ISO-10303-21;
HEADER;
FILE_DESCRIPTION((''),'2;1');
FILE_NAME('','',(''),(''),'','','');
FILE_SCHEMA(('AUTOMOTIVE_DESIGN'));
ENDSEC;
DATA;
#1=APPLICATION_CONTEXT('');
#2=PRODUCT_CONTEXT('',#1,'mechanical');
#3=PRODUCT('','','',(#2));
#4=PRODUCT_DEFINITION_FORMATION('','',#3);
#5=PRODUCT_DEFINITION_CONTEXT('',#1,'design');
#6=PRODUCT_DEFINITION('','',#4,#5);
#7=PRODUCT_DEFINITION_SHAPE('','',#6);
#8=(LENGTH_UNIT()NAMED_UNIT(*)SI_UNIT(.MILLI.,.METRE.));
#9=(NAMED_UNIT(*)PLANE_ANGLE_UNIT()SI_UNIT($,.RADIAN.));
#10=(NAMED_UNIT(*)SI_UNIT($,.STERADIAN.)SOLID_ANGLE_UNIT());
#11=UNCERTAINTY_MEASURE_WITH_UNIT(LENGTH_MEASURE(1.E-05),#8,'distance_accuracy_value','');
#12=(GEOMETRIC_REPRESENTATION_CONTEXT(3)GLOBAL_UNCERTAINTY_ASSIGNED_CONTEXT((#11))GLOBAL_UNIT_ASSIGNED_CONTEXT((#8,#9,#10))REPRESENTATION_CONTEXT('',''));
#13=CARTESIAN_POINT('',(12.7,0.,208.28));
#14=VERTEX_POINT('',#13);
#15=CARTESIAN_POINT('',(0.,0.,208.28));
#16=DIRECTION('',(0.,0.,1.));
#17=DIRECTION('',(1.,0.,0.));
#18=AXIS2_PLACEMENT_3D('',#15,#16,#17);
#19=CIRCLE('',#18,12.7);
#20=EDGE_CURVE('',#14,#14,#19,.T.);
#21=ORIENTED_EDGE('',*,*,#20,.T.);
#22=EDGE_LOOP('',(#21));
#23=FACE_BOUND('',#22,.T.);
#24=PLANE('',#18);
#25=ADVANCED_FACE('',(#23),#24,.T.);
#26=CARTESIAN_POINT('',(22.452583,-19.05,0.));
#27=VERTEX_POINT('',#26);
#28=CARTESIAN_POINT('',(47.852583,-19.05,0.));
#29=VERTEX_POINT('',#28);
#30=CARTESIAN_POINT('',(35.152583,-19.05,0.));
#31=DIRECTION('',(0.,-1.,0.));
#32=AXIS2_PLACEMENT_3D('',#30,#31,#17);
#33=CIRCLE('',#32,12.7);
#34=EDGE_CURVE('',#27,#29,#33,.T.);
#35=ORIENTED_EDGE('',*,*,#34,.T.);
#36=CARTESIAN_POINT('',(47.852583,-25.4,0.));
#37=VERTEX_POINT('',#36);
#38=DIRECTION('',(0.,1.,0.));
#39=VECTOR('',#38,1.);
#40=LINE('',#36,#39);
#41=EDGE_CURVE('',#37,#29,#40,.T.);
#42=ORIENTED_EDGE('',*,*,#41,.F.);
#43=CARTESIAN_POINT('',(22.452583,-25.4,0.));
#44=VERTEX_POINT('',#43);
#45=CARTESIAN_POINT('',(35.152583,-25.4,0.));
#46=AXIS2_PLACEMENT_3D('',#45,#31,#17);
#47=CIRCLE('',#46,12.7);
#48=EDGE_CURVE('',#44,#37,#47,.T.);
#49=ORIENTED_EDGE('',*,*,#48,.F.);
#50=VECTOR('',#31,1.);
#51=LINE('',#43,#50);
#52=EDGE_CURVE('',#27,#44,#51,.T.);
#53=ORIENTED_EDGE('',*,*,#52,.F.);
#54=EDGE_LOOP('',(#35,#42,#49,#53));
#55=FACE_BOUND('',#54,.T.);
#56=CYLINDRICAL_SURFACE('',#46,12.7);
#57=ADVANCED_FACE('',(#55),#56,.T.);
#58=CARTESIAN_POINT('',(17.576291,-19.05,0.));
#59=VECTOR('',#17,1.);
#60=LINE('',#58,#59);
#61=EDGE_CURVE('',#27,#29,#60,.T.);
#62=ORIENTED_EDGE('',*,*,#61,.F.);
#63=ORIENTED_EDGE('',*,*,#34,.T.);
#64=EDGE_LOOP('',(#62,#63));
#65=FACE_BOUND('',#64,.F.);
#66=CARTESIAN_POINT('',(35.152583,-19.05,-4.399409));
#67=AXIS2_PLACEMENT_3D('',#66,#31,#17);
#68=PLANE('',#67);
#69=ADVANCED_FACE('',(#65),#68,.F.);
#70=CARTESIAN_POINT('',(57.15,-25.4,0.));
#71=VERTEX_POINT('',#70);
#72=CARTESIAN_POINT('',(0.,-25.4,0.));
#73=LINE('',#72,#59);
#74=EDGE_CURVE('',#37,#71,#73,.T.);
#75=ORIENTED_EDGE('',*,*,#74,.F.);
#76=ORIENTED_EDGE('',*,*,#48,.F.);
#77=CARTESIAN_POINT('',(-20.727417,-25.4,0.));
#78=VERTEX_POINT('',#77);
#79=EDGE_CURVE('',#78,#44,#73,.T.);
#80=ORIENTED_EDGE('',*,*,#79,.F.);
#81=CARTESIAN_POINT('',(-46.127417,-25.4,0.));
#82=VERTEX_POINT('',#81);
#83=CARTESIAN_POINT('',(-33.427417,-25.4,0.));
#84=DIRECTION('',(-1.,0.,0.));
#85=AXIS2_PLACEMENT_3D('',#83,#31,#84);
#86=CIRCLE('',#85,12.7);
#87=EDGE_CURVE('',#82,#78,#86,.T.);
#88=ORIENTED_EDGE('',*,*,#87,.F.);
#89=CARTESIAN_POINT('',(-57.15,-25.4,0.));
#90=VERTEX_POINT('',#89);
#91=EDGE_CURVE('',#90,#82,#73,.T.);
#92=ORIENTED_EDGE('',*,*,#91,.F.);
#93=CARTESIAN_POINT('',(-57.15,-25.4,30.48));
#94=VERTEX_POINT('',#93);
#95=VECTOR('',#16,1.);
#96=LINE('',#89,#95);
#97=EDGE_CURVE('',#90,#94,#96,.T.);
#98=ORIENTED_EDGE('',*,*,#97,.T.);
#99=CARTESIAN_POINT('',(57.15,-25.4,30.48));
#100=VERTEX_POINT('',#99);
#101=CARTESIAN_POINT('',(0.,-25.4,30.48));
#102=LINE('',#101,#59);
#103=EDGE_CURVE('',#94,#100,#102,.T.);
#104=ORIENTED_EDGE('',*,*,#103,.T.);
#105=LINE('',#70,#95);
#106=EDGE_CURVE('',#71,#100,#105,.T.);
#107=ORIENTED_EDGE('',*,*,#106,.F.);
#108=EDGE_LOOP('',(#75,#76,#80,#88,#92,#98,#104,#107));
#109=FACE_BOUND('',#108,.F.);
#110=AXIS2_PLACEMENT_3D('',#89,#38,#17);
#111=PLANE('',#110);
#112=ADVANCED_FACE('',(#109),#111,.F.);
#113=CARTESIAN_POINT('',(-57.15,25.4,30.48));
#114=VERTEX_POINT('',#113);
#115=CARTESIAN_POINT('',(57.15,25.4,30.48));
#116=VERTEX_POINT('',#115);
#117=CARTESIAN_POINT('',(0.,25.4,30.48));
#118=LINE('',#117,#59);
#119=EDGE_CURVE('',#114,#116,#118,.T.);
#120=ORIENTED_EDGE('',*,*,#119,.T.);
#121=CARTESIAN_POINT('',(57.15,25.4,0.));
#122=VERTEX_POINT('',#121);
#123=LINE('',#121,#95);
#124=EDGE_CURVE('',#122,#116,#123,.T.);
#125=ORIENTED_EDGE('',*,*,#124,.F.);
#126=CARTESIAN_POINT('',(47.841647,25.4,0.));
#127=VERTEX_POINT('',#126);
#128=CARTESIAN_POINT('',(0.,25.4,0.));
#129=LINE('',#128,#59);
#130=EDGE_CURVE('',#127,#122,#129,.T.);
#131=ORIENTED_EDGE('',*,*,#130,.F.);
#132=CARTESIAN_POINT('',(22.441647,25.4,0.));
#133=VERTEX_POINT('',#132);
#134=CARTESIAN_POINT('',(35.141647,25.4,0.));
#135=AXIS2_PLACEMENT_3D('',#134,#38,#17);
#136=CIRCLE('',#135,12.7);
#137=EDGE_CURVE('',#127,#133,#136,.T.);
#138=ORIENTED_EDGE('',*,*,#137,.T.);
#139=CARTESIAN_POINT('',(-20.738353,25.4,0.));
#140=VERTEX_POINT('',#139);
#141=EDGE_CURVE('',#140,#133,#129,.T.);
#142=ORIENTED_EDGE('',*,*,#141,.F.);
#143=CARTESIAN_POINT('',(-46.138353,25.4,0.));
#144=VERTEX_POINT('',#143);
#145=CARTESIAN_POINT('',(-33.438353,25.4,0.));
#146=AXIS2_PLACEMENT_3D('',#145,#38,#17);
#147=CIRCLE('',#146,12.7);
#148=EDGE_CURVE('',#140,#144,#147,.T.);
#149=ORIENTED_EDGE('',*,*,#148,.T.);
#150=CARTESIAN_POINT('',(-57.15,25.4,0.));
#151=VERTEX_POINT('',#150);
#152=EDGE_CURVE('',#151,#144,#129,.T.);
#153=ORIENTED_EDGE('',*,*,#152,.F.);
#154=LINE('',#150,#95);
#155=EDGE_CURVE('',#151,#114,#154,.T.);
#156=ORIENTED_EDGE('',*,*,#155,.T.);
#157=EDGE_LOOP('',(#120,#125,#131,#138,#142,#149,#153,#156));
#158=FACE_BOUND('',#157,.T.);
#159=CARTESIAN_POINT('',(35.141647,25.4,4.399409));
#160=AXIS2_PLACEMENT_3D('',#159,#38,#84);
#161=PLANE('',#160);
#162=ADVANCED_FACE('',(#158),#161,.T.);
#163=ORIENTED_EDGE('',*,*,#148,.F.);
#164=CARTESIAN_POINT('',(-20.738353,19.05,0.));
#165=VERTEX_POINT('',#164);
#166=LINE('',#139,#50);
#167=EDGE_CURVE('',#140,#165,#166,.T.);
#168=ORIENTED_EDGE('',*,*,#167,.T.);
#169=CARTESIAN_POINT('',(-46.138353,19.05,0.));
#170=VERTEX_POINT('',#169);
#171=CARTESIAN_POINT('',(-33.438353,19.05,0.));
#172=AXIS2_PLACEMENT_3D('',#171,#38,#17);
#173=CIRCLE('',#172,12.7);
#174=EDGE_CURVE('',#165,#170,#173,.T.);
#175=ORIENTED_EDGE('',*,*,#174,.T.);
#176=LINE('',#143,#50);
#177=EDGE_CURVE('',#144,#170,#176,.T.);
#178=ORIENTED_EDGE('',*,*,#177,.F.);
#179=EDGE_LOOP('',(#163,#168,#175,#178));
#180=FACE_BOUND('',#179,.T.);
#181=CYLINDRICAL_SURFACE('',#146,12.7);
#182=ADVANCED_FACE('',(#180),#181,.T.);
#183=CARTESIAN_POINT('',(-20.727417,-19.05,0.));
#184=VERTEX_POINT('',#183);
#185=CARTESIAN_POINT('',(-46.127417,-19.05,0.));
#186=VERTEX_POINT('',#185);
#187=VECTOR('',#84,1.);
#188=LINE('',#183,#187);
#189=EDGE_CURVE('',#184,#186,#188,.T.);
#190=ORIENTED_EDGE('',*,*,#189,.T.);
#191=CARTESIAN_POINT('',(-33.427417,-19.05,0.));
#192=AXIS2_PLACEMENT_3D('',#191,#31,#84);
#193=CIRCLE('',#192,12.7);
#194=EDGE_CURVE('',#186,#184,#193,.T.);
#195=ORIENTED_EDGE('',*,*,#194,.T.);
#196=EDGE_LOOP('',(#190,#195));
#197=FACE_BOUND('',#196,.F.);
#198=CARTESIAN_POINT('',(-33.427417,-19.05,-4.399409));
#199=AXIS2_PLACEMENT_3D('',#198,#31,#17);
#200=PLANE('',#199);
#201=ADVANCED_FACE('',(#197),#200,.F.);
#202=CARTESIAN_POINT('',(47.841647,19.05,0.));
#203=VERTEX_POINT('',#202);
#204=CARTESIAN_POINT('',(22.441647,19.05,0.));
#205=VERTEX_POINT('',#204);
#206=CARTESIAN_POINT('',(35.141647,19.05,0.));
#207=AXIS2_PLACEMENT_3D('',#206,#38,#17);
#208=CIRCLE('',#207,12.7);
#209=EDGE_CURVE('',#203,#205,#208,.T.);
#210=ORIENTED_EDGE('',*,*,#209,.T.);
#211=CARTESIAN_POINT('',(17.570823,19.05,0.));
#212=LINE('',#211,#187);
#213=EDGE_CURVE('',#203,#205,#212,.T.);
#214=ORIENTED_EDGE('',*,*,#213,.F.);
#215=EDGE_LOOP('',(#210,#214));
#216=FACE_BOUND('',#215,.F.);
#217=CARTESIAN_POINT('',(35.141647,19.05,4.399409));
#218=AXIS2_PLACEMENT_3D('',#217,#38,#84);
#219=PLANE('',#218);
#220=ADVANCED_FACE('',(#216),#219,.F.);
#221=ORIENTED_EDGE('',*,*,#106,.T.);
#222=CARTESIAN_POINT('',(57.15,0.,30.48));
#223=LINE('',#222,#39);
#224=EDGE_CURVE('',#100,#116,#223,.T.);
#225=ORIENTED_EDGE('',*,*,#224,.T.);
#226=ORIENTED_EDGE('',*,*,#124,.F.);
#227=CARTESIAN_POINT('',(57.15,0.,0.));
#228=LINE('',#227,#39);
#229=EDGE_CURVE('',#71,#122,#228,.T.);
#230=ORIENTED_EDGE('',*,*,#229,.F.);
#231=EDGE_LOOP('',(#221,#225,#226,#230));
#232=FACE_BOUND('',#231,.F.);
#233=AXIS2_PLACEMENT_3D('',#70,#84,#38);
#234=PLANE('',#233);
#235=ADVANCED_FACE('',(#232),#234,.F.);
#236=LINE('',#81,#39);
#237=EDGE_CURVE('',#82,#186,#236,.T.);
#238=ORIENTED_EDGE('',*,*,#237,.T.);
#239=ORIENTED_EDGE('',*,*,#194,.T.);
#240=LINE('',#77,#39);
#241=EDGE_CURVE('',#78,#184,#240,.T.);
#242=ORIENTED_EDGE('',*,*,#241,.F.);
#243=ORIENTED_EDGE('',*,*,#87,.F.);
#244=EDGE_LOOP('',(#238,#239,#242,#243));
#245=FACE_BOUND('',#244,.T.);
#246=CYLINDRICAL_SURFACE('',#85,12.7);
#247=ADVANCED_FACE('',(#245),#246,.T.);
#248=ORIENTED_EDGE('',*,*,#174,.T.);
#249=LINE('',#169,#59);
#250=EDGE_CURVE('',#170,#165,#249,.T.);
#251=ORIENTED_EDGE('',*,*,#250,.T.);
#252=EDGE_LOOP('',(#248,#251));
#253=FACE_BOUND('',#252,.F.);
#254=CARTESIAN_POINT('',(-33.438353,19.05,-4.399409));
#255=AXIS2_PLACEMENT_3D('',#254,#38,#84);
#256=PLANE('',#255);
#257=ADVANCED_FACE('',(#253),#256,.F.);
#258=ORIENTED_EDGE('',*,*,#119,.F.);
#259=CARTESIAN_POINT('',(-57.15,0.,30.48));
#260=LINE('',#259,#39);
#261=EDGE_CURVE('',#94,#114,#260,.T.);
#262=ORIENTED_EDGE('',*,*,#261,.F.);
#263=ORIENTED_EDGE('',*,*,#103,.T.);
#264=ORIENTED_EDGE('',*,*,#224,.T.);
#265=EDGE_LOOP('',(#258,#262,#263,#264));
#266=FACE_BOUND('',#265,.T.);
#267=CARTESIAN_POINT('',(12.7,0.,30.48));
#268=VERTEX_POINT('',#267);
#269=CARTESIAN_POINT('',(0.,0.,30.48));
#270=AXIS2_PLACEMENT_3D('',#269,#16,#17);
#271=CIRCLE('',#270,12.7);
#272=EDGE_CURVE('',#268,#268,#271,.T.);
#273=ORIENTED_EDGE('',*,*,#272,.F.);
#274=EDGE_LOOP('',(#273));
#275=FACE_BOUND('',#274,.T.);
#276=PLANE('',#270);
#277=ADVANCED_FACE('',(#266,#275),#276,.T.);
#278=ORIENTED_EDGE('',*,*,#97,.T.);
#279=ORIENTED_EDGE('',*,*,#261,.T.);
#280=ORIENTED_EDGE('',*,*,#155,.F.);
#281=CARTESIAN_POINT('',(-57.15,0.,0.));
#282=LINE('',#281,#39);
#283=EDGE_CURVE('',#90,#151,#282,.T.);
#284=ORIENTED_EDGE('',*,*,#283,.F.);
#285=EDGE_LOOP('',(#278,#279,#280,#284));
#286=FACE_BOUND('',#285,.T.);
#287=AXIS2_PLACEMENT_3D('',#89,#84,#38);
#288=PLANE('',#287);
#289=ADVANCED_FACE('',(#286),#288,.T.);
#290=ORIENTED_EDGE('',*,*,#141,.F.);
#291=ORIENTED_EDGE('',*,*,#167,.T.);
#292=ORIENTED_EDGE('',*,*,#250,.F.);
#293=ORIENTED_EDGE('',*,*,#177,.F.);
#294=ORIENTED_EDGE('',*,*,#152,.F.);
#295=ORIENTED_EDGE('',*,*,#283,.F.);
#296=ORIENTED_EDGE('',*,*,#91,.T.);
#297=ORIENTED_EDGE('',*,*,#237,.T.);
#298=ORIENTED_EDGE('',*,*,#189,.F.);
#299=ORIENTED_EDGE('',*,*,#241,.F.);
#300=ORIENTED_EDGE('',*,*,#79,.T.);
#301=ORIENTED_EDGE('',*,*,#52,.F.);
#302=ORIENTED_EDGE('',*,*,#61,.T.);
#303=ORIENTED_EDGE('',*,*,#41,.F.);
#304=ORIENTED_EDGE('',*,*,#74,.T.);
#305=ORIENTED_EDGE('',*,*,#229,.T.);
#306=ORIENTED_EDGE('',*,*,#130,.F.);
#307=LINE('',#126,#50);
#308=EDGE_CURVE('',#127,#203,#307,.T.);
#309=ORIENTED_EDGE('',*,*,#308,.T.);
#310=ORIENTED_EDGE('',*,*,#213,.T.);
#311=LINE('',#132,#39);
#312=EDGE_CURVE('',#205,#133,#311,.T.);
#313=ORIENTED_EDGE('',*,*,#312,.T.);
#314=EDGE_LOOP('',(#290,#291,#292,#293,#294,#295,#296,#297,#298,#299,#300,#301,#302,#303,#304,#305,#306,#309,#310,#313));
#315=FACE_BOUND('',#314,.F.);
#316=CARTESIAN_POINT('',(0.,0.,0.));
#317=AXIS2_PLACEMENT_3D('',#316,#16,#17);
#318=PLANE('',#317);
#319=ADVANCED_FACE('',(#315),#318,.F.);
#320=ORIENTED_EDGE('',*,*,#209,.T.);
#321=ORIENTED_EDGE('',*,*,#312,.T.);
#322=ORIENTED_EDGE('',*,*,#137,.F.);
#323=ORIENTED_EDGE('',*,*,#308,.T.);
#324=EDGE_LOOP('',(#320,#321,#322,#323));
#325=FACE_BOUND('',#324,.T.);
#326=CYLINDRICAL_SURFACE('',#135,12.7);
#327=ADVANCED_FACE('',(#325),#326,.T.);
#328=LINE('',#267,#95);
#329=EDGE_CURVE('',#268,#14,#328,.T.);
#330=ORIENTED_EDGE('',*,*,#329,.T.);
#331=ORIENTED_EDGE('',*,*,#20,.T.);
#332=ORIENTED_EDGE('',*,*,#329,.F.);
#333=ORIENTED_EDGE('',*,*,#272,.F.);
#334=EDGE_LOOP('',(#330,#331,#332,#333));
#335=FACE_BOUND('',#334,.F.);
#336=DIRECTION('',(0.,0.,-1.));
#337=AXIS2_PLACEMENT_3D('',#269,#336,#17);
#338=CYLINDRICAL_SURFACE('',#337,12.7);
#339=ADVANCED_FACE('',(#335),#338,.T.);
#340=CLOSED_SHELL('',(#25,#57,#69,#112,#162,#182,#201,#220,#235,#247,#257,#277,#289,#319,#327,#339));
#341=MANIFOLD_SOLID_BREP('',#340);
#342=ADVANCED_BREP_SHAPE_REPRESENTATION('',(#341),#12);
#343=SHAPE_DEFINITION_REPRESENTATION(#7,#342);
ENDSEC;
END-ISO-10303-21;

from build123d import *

# Parameters (mm, degrees)
F0_W     = 114.3
F0_H     = 50.8
F1_DEPTH = 30.48
F2_R     = 12.7
F3_DEPTH = 177.8
F5_DEPTH = 6.35
F7_DEPTH = 6.35


with BuildPart() as f1:
    # F0 (on Top) → F1 (new body)
    with BuildSketch(Plane.XY):
        Rectangle(F0_W, F0_H)
    extrude(amount=F1_DEPTH)

    # F2 (on face) → F3 (join)
    with BuildSketch(Plane.XY.offset(30.48)):
        Circle(F2_R)
    extrude(amount=F3_DEPTH)

    # F4 (on face) → F5 (join)
    with BuildSketch(Plane(origin=(0, 25.4, 0), x_dir=(-1, 0, 0), z_dir=(0, 1, 0))):
        with BuildLine():
            Line((-47.841646862, 0), (-22.441646862, 0))
            ThreePointArc((-22.441646862, 0), (-35.141646862, 12.7), (-47.841646862, 0))
        make_face()
        with BuildLine():
            ThreePointArc((-47.841646862, 0), (-35.141646862, -12.7), (-22.441646862, 0))
            Line((-22.441646862, 0), (-47.841646862, 0))
        make_face()
        with BuildLine():
            Line((46.138353138, 0), (20.738353138, 0))
            ThreePointArc((20.738353138, 0), (33.438353138, -12.7), (46.138353138, 0))
        make_face()
    extrude(amount=-F5_DEPTH)

    # F6 (on face) → F7 (join)
    with BuildSketch(Plane.XZ.offset(25.4)):
        with BuildLine():
            ThreePointArc((-46.1274172783, 0), (-33.4274172783, -12.7), (-20.7274172783, 0))
            Line((-20.7274172783, 0), (-46.1274172783, 0))
        make_face()
        with BuildLine():
            Line((47.8525827217, 0), (22.4525827217, 0))
            ThreePointArc((22.4525827217, 0), (35.1525827217, -12.7), (47.8525827217, 0))
        make_face()
        with BuildLine():
            ThreePointArc((47.8525827217, 0), (35.1525827217, 12.7), (22.4525827217, 0))
            Line((22.4525827217, 0), (47.8525827217, 0))
        make_face()
    extrude(amount=-F7_DEPTH)


solid = f1.part
